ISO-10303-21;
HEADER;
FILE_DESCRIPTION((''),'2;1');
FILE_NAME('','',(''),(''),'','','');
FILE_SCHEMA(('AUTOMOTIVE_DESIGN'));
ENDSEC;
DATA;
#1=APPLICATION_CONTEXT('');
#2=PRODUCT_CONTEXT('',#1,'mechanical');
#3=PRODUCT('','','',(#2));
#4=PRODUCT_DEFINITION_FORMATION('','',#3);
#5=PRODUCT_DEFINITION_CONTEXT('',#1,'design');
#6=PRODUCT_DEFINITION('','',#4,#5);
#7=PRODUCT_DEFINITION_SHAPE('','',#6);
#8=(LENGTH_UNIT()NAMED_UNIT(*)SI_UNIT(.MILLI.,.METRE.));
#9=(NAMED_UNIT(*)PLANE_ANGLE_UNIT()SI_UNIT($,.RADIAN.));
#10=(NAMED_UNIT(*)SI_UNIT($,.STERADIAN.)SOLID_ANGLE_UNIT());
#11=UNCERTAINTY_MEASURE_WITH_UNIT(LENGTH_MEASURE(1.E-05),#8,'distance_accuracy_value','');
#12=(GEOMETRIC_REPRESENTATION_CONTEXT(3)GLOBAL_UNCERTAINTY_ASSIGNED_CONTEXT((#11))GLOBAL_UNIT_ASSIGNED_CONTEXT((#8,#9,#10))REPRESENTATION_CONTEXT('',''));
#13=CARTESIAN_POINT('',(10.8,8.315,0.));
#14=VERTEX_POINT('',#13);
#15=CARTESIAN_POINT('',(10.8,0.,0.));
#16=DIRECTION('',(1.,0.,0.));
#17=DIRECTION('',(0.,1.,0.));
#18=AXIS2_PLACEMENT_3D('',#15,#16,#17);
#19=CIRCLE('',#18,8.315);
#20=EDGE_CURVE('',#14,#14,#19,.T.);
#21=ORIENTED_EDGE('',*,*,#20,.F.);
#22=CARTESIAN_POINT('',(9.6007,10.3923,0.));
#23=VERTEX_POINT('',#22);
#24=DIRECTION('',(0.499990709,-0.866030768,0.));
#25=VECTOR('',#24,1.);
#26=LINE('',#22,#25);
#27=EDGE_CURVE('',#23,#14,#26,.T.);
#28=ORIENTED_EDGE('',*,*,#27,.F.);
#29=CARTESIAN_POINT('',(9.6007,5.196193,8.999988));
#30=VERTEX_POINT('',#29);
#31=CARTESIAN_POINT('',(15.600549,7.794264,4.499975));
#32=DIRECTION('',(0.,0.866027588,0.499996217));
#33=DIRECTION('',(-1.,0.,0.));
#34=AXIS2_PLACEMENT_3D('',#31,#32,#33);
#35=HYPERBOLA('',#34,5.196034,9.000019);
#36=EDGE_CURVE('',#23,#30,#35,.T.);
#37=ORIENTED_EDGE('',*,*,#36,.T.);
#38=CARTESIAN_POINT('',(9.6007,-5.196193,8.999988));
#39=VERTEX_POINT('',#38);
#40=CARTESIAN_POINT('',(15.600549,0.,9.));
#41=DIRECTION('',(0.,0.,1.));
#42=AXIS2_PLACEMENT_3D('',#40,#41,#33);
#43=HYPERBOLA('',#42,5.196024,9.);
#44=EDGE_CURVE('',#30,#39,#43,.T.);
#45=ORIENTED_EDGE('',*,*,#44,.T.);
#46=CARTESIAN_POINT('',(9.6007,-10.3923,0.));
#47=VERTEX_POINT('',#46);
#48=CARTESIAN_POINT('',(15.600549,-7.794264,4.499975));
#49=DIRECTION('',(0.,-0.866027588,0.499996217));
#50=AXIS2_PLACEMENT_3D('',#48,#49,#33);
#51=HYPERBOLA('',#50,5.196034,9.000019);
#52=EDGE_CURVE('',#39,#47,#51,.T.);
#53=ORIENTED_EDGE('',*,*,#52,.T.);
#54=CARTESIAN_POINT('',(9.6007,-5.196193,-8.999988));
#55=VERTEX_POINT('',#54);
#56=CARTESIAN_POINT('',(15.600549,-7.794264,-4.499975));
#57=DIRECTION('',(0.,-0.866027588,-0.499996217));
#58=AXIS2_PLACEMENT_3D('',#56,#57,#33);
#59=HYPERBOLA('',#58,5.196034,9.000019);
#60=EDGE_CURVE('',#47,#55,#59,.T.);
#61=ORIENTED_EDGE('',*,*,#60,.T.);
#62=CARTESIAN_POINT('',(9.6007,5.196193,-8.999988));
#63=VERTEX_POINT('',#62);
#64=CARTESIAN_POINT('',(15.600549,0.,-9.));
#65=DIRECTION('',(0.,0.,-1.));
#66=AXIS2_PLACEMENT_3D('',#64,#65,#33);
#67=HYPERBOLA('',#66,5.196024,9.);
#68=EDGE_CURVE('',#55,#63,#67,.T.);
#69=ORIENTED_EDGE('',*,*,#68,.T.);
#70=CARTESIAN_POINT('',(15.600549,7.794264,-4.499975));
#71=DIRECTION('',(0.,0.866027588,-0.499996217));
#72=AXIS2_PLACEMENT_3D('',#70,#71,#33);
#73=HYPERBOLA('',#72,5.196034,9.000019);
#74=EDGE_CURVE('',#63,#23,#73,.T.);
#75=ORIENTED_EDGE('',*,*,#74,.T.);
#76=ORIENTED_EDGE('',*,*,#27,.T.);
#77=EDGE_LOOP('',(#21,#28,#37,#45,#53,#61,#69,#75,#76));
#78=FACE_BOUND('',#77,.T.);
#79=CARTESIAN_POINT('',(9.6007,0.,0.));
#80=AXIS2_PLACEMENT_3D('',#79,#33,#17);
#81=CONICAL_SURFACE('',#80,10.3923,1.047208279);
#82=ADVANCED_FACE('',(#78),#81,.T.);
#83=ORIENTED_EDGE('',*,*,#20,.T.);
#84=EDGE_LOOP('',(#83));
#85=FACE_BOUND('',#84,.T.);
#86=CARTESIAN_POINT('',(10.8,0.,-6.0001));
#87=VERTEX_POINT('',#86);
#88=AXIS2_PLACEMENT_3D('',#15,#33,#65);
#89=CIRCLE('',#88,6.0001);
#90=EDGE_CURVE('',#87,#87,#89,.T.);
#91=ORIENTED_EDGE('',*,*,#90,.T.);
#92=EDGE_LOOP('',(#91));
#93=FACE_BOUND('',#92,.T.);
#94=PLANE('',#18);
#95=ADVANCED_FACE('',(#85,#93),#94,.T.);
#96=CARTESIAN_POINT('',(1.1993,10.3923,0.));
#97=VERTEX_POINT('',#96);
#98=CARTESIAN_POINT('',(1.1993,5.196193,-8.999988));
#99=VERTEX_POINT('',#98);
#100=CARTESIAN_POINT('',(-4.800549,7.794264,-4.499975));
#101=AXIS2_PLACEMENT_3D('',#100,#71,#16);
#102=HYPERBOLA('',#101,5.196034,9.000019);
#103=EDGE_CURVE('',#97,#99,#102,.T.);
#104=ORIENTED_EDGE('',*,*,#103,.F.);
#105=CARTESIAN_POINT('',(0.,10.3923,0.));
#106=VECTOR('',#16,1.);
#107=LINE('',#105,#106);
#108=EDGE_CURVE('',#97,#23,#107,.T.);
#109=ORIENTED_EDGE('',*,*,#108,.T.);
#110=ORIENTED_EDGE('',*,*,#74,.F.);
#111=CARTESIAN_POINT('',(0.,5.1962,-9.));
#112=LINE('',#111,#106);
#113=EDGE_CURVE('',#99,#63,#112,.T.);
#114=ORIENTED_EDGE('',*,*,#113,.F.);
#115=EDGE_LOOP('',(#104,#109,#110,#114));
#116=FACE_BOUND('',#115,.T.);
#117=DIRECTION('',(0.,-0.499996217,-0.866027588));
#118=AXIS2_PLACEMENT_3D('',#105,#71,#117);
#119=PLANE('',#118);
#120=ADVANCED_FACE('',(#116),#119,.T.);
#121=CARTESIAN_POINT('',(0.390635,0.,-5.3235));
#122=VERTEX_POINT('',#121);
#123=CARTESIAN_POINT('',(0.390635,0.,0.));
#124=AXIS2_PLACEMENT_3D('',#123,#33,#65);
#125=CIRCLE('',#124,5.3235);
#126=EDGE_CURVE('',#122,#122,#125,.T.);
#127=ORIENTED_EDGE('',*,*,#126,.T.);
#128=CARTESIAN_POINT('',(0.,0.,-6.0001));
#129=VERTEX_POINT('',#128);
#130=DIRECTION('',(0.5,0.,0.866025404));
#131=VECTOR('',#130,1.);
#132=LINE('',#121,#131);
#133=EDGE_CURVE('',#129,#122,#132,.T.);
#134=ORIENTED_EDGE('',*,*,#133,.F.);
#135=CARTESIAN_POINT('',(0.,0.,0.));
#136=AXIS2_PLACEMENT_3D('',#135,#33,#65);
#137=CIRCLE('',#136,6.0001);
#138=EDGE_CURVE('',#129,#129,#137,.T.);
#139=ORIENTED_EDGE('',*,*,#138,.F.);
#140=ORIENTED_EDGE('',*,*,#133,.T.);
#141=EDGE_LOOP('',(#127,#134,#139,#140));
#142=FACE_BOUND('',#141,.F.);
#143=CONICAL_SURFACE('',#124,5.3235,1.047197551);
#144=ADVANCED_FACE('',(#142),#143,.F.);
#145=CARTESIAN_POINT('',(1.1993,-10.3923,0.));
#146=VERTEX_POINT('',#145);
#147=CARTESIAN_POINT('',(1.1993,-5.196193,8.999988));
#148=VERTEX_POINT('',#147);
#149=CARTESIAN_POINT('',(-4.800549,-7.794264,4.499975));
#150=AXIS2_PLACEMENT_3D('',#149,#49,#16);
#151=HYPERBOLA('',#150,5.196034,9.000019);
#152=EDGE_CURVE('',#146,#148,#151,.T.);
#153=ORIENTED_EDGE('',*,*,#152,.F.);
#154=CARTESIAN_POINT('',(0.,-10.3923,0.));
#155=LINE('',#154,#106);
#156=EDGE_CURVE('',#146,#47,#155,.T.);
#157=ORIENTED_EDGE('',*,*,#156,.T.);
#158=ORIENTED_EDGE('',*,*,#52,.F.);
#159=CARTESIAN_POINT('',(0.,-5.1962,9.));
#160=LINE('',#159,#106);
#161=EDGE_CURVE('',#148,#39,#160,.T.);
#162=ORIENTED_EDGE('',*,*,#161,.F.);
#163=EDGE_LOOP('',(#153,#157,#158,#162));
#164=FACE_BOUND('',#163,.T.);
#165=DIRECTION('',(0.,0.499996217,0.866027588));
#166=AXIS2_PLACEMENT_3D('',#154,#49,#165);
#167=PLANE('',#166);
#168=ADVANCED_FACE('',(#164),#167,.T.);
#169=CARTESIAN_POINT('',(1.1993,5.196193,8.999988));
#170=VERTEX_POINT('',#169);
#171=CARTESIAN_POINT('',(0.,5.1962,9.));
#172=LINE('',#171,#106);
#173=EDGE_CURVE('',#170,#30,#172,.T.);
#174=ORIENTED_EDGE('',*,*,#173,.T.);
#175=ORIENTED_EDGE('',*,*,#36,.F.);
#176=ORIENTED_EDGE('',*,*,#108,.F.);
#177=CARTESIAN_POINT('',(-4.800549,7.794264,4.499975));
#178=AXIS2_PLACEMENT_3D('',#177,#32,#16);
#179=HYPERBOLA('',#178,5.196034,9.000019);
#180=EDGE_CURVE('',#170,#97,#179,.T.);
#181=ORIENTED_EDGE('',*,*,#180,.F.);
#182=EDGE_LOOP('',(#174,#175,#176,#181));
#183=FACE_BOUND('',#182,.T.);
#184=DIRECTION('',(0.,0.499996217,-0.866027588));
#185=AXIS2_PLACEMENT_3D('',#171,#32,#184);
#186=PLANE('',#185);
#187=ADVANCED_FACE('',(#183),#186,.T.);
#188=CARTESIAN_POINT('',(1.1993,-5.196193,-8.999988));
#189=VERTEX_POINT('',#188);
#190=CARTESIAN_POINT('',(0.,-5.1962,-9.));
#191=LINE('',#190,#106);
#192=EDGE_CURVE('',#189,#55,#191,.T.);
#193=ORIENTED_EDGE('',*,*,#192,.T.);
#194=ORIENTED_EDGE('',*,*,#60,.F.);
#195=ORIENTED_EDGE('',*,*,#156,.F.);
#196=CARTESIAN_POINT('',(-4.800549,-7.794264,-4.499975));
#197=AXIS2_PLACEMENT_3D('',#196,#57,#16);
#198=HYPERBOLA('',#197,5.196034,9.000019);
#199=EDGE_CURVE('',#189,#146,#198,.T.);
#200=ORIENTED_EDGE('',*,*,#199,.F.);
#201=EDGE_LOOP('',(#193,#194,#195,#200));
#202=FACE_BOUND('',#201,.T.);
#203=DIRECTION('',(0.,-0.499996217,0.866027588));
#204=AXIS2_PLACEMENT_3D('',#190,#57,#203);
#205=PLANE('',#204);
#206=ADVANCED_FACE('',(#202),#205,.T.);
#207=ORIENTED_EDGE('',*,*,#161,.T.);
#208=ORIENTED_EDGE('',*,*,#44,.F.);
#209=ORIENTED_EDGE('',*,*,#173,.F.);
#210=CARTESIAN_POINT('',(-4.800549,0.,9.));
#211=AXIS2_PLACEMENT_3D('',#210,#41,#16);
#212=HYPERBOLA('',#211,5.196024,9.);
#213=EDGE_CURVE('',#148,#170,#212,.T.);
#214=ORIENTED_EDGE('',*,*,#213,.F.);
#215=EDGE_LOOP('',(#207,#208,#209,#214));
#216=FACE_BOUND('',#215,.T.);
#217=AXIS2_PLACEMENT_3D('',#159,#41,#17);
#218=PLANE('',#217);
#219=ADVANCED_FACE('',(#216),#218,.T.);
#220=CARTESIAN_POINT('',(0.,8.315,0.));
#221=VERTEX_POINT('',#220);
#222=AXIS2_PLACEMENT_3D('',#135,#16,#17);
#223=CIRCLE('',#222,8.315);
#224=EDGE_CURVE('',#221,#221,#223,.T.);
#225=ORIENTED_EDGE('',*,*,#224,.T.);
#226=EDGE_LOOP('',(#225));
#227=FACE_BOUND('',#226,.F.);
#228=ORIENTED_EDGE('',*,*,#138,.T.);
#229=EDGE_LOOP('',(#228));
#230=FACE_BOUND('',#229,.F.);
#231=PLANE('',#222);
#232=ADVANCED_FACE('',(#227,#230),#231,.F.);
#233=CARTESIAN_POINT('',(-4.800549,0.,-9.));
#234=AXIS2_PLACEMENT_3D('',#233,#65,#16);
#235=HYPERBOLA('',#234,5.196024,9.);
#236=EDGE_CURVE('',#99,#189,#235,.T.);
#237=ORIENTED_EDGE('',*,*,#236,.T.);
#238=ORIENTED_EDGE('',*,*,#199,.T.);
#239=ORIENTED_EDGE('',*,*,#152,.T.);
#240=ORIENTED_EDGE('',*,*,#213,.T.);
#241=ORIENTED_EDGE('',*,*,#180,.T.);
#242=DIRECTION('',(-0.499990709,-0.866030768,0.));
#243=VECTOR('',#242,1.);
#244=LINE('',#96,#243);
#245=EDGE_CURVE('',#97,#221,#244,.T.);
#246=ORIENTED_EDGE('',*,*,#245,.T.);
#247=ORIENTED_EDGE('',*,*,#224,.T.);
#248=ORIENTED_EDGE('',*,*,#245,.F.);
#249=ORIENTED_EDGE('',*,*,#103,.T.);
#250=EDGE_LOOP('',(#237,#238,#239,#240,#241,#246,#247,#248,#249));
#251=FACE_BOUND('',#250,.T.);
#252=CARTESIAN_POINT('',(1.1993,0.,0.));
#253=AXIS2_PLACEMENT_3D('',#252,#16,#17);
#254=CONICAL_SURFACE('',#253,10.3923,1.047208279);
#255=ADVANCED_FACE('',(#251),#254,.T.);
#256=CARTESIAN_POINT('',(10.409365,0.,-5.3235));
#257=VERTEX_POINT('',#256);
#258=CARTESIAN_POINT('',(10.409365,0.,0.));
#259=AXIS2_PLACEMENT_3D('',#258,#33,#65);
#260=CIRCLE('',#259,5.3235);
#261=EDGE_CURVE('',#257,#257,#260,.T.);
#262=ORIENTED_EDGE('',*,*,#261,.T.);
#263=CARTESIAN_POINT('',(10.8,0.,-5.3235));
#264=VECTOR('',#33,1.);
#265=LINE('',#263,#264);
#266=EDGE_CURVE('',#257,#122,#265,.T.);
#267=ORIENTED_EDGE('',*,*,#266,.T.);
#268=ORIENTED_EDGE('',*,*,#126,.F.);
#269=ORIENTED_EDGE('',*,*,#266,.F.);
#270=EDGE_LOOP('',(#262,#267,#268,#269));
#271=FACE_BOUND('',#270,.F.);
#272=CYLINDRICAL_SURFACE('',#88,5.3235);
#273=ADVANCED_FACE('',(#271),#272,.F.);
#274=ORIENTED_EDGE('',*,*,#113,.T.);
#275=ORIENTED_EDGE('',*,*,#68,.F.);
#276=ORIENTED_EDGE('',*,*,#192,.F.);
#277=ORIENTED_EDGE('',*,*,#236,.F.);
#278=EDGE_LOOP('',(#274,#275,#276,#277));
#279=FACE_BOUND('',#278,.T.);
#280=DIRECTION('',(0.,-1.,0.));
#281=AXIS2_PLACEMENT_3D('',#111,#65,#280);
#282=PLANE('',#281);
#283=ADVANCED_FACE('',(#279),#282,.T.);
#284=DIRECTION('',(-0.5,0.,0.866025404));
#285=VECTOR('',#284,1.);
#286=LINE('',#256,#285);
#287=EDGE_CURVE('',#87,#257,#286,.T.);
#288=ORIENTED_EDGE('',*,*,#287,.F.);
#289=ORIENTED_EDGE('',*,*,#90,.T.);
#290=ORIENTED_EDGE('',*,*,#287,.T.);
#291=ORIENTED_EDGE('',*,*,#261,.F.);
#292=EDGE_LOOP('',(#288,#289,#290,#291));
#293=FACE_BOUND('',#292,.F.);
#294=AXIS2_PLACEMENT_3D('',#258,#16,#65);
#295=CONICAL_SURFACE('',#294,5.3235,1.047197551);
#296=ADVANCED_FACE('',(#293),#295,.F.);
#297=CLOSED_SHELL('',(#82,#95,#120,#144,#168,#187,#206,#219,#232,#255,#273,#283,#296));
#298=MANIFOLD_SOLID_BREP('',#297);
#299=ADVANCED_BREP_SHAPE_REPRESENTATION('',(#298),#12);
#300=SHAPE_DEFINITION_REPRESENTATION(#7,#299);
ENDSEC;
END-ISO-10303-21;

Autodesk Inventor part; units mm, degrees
ref_plane "YZ Plane" through (0, 0, 0) normal (1, 0, 0) x (0, 1, 0)
ref_plane "XZ Plane" through (0, 0, 0) normal (0, 1, 0) x (-1, 0, 0)
sketch "Эскиз1" plane through (0, 0, 0) normal (1, 0, 0) x (0, 1, 0)
  line L0 (-10.3923, 0) -> (-5.1962, 9)
  line L1 (-5.1962, 9) -> (5.1962, 9)
  line L2 (5.1962, 9) -> (10.3923, 0)
  line L3 (10.3923, 0) -> (5.1962, -9)
  line L4 (5.1962, -9) -> (-5.1962, -9)
  line L5 (-5.1962, -9) -> (-10.3923, 0)
  point P0 (0, 0)
  point P1 (0, 0)
  dimension "d0" = 20.7846
extrude "Базовый элемент" add sketch "Эскиз1" along normal blind 10.8
sketch "Эскиз2" plane through (0, 0, 0) normal (0, 0, 1) x (1, 0, 0)
  line L0 (0, 5.1962) -> (0, 10.3923) projected
  line L1 (0, 10.3923) -> (10.8, 10.3923) projected
  line L2 (10.8, 5.1962) -> (10.8, 10.3923) projected
  line L3 (-2.16, 0) -> (12.96, 0) projected
  line L4 (1.1993, 10.3923) -> (0, 8.315)
  line L5 (9.6007, 10.3923) -> (10.8, 8.315)
  dimension "d3" = 30
  dimension "d4" = 30
  dimension "d5" = 16.63
  dimension "d6" = 16.63
revolve "Фаска1" cut sketch "Эскиз2" angle 360 about axis through (-10, 0, 0) along (1, 0, 0)
sketch "Эскиз3" plane through (10.8, 0, 0) normal (1, 0, 0) x (0, 0, -1)
  arc A0 (-0.625, -1.0825) -> (0.625, -1.0825) centre (0, 0) ccw projected
hole "Резьба" at (10.8, 0, 0) direction (-1, 0, 0) diameter 10.647 end through all thread size "M12x1.25" class "6H" standard "ISO Metric profile"
chamfer "Фаска2" distance 0.6766 angle 30 1 edges at (10.8, 0, 5.3235) measured on face at (10.8, 7.2244, -0.8772)
chamfer "Фаска3" distance 0.6766 angle 30 1 edges at (0, 0, 5.3235) measured on face at (0, 7.2244, -0.8772)
ref_plane "Work Plane1" through (-18.9656, 0, 0) normal (0, -0.8660254, -0.5) x (1, 0, 0)
equation "\"d0\" = 1.1547 * SW"
equation "\"d1\" = KOH"
equation "\"d3\" = ANG1"
equation "\"d4\" = ANG2"
equation "\"d5\" = SW0"
equation "\"d6\" = SW01"
equation "\"d8\" = -0.5 * GD1 + 0.5 * NND"
equation "\"d40\" = -0.5 * GD1 + 0.5 * NND"
equation "\"d10\" = -0.5 * GD1 + 0.5 * NND"
equation "\"d41\" = -0.5 * GD1 + 0.5 * NND"
equation "\"ANG1\" = 30deg"
equation "\"ANG2\" = 30deg"
equation "\"NND\" = 12"
equation "\"KOH\" = 10.8"
equation "\"SW\" = 18"
equation "\"SW0\" = 16.63"
equation "\"SW01\" = SW0"
equation "\"GUL\" = 0.541266 * PTC"
equation "\"LADI\" = 16.63"
equation "\"TOA\" = 30deg"
equation "\"FAWI\" = 30deg"
equation "\"PTC\" = 1.25"
equation "\"THREADDIA\" = 12"
equation "\"E0\" = 1.155 * SW"
equation "\"GAL\" = 0.541266 * PTC"
equation "\"GD1\" = 10.646835"
properties part number "Копия гайки M12x1,25-6H ГОСТ 5915-70" material "Сталь, мягкая"
